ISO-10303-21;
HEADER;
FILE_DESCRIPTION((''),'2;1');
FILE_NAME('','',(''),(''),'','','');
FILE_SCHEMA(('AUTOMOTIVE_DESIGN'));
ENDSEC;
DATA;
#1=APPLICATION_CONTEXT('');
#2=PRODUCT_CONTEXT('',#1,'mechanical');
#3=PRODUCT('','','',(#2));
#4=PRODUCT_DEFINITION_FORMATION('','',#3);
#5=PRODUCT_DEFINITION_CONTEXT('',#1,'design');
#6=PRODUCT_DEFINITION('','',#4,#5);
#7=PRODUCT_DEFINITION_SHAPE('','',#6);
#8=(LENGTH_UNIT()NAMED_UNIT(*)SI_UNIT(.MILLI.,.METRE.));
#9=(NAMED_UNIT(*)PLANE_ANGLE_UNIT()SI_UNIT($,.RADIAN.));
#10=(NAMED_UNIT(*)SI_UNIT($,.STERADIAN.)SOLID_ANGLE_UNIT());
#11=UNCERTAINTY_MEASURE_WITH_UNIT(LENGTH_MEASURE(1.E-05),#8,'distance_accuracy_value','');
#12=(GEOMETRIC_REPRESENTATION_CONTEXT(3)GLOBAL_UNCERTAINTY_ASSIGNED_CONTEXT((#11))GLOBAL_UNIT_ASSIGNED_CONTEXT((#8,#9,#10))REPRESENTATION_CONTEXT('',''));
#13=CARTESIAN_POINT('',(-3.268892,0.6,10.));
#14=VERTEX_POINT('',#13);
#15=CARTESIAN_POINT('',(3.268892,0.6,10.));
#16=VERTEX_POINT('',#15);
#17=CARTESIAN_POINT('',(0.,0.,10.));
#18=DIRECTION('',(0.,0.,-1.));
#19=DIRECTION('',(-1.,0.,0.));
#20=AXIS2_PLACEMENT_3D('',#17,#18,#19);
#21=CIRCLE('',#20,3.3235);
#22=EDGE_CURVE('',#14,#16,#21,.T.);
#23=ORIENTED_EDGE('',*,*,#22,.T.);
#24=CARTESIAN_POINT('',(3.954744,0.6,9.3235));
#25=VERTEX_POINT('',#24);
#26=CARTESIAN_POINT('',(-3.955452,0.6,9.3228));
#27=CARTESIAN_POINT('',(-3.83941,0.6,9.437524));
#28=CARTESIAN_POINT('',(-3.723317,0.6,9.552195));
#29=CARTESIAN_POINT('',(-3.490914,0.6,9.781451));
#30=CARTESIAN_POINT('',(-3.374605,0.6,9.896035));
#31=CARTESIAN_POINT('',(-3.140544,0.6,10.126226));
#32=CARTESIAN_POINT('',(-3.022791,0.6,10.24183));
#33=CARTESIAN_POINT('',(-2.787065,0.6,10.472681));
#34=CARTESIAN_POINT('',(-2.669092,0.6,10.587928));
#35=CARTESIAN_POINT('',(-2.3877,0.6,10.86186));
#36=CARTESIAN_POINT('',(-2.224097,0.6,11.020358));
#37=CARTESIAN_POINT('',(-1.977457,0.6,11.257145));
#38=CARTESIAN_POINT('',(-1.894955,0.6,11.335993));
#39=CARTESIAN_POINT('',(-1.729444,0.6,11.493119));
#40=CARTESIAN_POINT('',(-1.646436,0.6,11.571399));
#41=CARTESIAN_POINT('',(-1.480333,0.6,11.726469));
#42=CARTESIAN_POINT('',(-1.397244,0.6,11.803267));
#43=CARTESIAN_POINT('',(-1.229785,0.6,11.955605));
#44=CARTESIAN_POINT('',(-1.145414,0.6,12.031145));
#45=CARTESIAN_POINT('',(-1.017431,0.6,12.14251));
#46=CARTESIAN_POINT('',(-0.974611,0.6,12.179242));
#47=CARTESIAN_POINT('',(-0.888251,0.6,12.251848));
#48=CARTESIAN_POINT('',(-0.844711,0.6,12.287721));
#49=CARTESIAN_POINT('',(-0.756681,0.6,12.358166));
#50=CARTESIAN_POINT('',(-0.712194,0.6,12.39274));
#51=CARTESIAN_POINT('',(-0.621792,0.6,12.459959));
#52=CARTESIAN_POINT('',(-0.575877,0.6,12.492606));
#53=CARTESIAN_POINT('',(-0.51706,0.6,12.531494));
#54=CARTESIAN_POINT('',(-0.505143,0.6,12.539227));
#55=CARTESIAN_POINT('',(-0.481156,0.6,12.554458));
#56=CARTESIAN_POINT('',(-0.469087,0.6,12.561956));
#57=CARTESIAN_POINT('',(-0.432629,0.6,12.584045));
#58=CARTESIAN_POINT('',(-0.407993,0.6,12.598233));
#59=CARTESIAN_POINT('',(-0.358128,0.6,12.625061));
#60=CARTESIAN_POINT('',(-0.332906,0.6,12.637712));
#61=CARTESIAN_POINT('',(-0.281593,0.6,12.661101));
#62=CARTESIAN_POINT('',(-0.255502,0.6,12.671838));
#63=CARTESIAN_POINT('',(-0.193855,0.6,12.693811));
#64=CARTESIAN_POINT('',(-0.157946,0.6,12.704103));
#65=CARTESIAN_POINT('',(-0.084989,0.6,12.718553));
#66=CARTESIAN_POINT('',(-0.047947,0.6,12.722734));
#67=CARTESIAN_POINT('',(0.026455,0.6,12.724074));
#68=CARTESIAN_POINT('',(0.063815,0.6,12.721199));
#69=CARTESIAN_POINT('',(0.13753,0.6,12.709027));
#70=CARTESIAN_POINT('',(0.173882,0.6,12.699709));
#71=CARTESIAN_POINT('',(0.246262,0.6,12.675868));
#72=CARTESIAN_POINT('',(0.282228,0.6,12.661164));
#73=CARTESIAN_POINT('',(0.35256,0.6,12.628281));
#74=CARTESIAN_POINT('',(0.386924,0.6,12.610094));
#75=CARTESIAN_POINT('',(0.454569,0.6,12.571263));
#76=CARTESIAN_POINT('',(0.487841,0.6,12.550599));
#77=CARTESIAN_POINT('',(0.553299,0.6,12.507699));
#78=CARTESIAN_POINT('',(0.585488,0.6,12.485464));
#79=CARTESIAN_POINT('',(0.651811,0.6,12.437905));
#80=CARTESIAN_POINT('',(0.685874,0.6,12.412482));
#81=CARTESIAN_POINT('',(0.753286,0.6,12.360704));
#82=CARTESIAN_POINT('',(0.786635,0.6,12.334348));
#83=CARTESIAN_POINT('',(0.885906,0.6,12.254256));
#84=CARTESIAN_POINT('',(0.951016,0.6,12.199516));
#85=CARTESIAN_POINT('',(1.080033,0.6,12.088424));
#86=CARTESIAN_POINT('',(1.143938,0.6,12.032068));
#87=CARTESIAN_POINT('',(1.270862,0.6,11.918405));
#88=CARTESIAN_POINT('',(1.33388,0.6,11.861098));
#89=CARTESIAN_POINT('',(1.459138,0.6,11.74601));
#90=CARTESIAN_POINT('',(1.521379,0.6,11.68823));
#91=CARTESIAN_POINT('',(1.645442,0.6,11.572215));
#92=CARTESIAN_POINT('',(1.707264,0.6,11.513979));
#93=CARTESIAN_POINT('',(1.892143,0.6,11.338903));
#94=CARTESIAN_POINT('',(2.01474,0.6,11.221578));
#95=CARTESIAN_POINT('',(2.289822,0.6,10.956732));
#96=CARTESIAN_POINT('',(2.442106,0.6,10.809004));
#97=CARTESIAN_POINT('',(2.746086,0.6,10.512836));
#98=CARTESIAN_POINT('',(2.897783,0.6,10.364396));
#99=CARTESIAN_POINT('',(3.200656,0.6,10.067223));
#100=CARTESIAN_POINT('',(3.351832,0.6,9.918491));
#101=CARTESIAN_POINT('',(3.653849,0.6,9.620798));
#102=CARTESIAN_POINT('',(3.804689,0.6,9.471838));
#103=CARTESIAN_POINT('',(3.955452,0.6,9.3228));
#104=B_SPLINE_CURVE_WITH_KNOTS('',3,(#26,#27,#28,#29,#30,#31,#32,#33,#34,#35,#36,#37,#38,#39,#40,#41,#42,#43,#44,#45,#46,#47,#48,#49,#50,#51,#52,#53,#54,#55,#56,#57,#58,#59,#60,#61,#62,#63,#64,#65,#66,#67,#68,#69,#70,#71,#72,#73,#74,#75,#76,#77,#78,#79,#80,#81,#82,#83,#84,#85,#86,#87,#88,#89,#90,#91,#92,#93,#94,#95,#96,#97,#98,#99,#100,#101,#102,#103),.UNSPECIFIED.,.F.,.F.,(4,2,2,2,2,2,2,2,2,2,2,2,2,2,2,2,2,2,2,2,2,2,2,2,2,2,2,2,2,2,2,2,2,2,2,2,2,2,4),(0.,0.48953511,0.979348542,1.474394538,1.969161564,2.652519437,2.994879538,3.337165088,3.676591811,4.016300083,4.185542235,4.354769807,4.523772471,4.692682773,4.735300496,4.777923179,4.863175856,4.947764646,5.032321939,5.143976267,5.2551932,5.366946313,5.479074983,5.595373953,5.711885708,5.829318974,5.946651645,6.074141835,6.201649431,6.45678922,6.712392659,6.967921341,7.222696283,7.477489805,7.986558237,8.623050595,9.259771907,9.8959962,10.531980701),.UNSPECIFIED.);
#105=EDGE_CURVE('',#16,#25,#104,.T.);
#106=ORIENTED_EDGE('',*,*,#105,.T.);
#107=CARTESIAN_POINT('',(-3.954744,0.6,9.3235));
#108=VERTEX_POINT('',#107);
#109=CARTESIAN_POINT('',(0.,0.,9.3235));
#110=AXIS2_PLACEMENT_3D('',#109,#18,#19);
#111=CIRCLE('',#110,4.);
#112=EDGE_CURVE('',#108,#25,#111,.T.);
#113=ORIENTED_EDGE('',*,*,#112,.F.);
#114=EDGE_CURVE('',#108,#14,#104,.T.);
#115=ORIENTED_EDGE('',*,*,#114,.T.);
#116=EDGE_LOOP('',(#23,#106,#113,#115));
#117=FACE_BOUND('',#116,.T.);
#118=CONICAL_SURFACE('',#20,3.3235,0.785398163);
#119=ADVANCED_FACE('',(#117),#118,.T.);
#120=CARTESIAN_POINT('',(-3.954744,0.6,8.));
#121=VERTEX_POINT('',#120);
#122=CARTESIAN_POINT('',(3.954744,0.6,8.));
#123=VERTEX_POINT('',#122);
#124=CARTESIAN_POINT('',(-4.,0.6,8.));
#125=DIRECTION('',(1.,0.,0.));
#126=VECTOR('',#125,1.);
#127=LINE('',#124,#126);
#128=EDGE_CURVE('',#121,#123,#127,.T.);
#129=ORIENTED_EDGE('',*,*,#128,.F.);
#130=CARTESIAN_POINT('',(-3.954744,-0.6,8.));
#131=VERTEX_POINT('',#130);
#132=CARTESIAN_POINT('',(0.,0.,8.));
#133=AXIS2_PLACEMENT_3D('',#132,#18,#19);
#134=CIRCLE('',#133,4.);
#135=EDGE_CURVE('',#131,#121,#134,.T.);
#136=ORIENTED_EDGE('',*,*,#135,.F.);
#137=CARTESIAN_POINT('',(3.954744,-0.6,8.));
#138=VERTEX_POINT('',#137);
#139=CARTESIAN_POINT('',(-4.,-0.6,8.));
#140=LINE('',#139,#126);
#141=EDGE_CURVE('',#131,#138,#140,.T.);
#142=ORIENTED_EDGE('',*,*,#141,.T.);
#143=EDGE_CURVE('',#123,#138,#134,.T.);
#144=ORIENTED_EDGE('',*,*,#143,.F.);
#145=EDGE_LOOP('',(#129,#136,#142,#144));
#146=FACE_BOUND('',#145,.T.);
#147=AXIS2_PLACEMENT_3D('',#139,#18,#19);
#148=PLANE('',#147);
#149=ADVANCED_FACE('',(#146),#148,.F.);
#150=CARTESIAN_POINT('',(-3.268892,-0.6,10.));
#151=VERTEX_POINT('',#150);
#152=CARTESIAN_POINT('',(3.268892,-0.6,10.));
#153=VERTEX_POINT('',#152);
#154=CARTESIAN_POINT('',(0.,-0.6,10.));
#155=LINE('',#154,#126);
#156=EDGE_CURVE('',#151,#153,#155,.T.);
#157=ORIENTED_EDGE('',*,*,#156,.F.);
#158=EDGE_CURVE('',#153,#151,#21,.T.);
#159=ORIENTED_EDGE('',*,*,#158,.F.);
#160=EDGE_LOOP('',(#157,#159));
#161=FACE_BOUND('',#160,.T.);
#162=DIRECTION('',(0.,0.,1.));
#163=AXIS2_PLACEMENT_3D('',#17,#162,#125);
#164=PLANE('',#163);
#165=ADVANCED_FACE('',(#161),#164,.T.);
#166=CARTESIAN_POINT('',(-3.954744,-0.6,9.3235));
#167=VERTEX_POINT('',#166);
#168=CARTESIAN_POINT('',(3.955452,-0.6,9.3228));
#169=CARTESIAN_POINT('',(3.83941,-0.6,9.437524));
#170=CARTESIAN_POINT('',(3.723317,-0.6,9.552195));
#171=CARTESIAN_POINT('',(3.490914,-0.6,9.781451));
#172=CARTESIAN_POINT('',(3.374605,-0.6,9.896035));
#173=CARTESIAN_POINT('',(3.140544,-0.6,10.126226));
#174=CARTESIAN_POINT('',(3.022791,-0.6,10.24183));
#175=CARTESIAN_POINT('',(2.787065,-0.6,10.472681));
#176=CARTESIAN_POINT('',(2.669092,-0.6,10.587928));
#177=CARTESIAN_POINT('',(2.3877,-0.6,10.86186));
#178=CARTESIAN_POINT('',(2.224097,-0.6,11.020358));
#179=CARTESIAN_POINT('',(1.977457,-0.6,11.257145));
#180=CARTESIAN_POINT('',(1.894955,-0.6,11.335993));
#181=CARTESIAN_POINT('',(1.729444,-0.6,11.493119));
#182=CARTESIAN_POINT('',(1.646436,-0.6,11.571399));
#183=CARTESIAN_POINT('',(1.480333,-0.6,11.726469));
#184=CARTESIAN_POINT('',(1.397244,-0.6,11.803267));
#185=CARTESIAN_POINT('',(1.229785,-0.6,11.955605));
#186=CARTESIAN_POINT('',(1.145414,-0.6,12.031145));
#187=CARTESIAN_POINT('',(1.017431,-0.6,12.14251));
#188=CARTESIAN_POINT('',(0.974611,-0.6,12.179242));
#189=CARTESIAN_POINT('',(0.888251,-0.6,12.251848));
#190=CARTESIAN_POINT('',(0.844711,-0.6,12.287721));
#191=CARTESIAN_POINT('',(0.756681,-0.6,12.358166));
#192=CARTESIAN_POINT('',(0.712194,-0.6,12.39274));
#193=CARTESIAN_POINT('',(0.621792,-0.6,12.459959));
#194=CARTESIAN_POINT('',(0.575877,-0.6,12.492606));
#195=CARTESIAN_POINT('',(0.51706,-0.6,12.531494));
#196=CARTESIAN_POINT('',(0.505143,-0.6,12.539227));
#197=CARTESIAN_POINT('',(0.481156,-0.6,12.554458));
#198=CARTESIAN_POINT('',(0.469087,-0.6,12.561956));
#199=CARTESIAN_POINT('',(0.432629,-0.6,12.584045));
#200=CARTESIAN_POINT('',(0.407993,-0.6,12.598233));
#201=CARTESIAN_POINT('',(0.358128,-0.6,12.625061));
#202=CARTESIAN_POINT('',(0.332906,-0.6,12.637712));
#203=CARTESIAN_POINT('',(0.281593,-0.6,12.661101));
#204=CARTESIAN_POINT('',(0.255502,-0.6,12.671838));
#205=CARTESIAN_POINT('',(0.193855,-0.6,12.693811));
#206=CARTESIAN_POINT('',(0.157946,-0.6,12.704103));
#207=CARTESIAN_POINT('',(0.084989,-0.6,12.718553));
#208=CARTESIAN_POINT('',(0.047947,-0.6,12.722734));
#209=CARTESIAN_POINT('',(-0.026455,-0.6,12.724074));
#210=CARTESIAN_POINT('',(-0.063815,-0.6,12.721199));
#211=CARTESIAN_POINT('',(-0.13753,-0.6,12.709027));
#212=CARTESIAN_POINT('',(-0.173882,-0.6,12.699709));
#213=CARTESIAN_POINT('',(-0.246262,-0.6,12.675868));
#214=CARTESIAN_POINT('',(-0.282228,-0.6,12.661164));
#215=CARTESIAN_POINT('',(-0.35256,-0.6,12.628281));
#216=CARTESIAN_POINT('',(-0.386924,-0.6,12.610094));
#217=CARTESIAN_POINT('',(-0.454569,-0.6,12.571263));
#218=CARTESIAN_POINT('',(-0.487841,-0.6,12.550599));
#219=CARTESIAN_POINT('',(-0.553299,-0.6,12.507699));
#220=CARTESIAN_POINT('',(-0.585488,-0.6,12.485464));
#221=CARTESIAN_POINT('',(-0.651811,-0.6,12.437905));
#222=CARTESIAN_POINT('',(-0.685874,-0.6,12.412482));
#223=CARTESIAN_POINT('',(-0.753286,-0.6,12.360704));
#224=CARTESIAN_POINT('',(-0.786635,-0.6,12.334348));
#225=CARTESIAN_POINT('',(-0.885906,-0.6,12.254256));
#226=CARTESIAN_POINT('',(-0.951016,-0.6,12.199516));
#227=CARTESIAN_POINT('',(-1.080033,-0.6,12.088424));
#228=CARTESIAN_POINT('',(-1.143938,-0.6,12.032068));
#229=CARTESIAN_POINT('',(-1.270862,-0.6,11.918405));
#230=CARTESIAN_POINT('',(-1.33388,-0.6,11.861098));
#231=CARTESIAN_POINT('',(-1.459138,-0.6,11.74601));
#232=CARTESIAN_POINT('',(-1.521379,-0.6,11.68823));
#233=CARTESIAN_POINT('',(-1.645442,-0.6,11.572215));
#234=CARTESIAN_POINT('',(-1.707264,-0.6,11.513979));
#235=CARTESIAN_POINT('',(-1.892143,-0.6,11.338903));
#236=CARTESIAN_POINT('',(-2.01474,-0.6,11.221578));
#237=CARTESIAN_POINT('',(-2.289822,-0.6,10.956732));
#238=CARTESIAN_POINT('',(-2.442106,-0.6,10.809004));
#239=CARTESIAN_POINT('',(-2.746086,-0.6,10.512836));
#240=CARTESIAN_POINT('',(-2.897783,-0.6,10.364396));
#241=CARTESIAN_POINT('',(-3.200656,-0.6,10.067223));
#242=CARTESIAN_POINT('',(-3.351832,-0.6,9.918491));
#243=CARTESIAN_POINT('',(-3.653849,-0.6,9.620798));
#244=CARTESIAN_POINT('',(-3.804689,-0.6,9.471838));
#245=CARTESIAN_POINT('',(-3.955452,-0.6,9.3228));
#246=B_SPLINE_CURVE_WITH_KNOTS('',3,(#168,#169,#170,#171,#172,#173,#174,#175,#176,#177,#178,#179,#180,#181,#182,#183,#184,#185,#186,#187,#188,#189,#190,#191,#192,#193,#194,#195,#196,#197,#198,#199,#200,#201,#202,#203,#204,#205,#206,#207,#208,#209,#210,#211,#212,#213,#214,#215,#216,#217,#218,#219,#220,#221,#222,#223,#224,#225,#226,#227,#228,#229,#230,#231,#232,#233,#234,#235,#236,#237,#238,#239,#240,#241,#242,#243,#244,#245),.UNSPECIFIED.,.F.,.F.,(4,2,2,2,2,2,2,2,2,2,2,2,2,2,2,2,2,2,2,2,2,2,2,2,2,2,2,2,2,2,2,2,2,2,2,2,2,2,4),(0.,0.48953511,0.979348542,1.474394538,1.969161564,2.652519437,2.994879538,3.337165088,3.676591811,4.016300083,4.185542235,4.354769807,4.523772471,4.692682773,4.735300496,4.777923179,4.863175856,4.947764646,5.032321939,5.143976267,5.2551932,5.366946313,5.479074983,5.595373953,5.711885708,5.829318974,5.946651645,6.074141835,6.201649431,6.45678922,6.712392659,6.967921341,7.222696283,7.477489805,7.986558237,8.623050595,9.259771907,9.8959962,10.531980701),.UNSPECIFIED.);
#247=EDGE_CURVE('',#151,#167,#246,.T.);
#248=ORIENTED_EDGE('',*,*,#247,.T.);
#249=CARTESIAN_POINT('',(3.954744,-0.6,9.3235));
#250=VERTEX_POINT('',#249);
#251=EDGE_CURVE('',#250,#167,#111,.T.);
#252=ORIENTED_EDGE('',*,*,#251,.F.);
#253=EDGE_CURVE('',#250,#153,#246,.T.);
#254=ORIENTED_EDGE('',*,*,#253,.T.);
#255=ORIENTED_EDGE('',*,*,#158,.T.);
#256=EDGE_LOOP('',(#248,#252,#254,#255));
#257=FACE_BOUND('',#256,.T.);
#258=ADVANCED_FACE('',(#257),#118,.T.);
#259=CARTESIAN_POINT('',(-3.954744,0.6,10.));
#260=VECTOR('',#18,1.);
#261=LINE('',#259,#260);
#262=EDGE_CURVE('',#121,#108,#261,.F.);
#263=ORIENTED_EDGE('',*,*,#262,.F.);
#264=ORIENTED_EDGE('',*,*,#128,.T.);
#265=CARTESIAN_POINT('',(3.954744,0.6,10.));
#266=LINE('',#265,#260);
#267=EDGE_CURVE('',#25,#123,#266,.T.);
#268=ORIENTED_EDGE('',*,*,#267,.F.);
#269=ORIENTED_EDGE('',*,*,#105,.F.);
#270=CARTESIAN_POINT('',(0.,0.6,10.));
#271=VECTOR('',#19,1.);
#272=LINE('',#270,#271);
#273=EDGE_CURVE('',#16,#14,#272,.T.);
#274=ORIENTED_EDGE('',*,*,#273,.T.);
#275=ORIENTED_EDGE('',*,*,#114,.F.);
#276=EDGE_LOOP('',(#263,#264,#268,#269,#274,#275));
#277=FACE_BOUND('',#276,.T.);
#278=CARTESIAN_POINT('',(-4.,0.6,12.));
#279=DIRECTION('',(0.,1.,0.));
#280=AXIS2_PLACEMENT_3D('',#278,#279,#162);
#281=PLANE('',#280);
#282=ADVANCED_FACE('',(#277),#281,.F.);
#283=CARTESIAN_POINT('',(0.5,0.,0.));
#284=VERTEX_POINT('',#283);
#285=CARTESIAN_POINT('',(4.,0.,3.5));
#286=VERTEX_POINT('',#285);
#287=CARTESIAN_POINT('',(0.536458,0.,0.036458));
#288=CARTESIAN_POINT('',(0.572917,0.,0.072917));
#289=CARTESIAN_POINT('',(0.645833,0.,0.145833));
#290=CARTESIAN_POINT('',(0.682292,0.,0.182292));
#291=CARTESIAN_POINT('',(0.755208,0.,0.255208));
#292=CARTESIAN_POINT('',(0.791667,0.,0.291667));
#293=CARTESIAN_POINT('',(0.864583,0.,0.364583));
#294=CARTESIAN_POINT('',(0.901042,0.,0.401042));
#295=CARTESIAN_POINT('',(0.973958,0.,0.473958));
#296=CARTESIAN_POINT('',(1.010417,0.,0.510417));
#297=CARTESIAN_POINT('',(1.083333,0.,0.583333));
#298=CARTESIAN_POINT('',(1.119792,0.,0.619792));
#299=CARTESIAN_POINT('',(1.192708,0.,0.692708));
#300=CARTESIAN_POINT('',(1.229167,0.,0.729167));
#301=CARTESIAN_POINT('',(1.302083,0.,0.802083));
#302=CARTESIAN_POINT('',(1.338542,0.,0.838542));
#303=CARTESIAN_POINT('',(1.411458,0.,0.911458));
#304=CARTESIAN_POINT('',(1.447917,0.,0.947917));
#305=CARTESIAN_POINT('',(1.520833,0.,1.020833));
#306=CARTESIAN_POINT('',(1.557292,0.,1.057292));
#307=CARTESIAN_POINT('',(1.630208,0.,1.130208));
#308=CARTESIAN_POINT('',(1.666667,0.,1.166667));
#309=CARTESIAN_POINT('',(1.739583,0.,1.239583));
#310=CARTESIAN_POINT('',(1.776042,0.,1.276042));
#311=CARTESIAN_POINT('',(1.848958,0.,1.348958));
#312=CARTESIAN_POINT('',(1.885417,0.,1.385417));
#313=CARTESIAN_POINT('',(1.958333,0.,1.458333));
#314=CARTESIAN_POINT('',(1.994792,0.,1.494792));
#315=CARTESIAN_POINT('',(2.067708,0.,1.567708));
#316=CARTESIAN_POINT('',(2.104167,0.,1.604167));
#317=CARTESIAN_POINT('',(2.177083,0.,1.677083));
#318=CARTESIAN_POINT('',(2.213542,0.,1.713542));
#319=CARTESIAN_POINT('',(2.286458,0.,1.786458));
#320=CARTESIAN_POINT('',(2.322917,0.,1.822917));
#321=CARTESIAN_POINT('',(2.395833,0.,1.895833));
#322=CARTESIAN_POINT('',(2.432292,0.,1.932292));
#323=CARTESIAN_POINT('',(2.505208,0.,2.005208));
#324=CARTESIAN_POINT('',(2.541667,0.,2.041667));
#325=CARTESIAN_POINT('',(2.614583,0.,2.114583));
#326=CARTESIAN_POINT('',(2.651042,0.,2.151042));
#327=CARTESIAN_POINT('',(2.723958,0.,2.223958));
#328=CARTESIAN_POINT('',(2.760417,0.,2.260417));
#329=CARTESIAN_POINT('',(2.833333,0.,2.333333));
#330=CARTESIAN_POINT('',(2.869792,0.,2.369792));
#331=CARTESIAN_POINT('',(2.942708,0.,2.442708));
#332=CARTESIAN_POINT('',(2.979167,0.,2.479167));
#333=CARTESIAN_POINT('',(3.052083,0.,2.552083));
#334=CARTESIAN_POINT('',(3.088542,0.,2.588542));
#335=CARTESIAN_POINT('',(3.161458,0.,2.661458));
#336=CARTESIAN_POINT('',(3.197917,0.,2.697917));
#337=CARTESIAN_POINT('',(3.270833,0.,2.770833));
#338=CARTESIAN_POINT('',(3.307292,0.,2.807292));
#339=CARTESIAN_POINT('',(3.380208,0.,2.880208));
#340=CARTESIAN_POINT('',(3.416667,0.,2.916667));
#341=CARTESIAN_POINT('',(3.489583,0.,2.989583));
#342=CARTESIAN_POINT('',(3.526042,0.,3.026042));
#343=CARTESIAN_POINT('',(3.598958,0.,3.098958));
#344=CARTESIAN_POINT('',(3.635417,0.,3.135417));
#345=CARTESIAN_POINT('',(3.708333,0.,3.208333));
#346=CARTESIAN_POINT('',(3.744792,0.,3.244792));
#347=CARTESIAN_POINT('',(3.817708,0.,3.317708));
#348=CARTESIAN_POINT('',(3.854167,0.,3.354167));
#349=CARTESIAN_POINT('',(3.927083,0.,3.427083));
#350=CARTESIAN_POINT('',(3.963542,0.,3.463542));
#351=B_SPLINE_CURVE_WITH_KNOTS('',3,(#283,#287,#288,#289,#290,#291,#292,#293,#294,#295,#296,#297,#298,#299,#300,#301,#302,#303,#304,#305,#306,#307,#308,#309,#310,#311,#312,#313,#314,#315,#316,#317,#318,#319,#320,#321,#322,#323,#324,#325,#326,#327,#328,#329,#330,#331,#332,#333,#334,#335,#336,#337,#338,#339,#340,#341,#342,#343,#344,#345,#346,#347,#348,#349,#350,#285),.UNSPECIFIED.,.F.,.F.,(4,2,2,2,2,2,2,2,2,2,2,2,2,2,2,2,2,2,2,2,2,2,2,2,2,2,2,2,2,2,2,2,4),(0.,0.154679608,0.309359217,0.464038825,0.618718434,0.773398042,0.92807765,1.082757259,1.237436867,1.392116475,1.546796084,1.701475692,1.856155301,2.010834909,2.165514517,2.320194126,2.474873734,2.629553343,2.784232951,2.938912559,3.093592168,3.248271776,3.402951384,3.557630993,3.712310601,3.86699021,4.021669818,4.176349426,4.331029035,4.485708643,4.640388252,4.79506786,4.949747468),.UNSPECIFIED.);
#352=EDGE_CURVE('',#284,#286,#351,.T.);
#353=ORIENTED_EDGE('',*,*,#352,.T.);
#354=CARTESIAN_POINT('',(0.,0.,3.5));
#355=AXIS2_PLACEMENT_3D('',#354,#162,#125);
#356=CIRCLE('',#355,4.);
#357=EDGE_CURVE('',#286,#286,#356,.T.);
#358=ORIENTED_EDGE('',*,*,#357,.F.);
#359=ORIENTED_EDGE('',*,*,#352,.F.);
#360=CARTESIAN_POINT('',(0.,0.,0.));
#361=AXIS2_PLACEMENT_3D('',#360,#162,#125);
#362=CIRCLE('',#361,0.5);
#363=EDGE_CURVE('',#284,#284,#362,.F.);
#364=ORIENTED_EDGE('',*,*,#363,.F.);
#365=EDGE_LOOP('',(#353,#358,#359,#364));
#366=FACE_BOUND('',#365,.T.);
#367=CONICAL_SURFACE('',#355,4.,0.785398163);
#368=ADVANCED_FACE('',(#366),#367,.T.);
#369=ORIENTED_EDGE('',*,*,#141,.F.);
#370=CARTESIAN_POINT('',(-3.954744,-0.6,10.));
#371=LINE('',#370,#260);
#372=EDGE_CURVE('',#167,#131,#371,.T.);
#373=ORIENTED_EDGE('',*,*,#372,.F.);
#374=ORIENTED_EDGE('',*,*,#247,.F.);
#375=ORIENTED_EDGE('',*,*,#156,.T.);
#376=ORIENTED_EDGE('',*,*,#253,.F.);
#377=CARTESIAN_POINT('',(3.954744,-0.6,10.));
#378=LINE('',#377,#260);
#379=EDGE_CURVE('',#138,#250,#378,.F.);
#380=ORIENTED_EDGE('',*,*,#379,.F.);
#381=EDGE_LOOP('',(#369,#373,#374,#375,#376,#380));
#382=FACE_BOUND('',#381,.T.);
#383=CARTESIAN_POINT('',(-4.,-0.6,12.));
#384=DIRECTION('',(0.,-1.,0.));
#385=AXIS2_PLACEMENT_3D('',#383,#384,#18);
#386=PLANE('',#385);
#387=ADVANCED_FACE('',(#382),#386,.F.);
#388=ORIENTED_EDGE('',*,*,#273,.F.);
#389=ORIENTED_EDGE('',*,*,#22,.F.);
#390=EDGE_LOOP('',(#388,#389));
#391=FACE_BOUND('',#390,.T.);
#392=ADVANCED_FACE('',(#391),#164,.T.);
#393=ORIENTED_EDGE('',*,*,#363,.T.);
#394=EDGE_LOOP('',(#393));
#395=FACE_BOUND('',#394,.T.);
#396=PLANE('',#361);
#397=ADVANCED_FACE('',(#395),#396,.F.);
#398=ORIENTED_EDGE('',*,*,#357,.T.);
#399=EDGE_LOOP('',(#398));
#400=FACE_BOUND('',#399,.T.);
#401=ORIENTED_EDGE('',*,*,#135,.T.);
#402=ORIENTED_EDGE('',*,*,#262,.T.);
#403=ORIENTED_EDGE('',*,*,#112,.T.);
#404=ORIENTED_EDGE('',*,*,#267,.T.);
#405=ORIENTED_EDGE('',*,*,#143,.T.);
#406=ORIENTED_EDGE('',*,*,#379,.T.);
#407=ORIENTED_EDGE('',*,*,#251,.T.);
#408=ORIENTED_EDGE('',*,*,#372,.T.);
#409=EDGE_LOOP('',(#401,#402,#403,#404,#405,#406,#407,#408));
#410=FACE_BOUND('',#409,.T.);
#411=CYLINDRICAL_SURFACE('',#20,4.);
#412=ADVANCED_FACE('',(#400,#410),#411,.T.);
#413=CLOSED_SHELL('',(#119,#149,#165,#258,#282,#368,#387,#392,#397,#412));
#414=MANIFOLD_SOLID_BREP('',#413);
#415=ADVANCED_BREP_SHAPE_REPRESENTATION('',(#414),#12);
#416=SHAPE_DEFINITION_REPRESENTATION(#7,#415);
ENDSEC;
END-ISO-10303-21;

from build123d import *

# Parameters (mm, degrees)
SKETCH_2_R               = 4
EXTRUDE_1_DEPTH          = 10
CHAMFER_1_SIZE           = 3.5
CUT_EXTRUDE_1_DEPTH      = 12.489125293
CUT_EXTRUDE_1_DEPTH_BACK = 12.489125293
SKETCH_4_W               = 4
SKETCH_4_H               = 1.2


# Read off the part's stored shape, not the designer's step: M8 机械螺纹 螺柱1
with BuildPart() as part:
    # 草图2 → 凸台-拉伸1 (new body)
    with BuildSketch(Plane.XY):
        Circle(SKETCH_2_R)
    extrude(amount=EXTRUDE_1_DEPTH)

    # M8 机械螺纹 螺柱1 outline → M8 机械螺纹 螺柱1 (revolve, cut)
    with BuildSketch(Plane.XZ):
        Polygon((4, 10), (3.3235, 10), (4, 9.3235), align=None)
    revolve(axis=Axis((0, 0, 0), (0, 0, 1)), mode=Mode.SUBTRACT)

    # 倒角1
    chamfer_1_edges = [part.edges().sort_by_distance(p)[0] for p in [
        (-4, 0, 0),
    ]]
    chamfer(chamfer_1_edges, length=CHAMFER_1_SIZE)

    # 草图4 → 切除-拉伸1 (cut, two sides: drawn at the far end of the back side and taken through both)
    with BuildSketch(Plane(origin=(0, 0, 0), x_dir=(0, 0, -1), z_dir=(1, 0, 0)).offset(-CUT_EXTRUDE_1_DEPTH_BACK)):
        with Locations((-10, 0)):
            Rectangle(SKETCH_4_W, SKETCH_4_H)
    extrude(amount=CUT_EXTRUDE_1_DEPTH + CUT_EXTRUDE_1_DEPTH_BACK, mode=Mode.SUBTRACT)


solid = part.part
